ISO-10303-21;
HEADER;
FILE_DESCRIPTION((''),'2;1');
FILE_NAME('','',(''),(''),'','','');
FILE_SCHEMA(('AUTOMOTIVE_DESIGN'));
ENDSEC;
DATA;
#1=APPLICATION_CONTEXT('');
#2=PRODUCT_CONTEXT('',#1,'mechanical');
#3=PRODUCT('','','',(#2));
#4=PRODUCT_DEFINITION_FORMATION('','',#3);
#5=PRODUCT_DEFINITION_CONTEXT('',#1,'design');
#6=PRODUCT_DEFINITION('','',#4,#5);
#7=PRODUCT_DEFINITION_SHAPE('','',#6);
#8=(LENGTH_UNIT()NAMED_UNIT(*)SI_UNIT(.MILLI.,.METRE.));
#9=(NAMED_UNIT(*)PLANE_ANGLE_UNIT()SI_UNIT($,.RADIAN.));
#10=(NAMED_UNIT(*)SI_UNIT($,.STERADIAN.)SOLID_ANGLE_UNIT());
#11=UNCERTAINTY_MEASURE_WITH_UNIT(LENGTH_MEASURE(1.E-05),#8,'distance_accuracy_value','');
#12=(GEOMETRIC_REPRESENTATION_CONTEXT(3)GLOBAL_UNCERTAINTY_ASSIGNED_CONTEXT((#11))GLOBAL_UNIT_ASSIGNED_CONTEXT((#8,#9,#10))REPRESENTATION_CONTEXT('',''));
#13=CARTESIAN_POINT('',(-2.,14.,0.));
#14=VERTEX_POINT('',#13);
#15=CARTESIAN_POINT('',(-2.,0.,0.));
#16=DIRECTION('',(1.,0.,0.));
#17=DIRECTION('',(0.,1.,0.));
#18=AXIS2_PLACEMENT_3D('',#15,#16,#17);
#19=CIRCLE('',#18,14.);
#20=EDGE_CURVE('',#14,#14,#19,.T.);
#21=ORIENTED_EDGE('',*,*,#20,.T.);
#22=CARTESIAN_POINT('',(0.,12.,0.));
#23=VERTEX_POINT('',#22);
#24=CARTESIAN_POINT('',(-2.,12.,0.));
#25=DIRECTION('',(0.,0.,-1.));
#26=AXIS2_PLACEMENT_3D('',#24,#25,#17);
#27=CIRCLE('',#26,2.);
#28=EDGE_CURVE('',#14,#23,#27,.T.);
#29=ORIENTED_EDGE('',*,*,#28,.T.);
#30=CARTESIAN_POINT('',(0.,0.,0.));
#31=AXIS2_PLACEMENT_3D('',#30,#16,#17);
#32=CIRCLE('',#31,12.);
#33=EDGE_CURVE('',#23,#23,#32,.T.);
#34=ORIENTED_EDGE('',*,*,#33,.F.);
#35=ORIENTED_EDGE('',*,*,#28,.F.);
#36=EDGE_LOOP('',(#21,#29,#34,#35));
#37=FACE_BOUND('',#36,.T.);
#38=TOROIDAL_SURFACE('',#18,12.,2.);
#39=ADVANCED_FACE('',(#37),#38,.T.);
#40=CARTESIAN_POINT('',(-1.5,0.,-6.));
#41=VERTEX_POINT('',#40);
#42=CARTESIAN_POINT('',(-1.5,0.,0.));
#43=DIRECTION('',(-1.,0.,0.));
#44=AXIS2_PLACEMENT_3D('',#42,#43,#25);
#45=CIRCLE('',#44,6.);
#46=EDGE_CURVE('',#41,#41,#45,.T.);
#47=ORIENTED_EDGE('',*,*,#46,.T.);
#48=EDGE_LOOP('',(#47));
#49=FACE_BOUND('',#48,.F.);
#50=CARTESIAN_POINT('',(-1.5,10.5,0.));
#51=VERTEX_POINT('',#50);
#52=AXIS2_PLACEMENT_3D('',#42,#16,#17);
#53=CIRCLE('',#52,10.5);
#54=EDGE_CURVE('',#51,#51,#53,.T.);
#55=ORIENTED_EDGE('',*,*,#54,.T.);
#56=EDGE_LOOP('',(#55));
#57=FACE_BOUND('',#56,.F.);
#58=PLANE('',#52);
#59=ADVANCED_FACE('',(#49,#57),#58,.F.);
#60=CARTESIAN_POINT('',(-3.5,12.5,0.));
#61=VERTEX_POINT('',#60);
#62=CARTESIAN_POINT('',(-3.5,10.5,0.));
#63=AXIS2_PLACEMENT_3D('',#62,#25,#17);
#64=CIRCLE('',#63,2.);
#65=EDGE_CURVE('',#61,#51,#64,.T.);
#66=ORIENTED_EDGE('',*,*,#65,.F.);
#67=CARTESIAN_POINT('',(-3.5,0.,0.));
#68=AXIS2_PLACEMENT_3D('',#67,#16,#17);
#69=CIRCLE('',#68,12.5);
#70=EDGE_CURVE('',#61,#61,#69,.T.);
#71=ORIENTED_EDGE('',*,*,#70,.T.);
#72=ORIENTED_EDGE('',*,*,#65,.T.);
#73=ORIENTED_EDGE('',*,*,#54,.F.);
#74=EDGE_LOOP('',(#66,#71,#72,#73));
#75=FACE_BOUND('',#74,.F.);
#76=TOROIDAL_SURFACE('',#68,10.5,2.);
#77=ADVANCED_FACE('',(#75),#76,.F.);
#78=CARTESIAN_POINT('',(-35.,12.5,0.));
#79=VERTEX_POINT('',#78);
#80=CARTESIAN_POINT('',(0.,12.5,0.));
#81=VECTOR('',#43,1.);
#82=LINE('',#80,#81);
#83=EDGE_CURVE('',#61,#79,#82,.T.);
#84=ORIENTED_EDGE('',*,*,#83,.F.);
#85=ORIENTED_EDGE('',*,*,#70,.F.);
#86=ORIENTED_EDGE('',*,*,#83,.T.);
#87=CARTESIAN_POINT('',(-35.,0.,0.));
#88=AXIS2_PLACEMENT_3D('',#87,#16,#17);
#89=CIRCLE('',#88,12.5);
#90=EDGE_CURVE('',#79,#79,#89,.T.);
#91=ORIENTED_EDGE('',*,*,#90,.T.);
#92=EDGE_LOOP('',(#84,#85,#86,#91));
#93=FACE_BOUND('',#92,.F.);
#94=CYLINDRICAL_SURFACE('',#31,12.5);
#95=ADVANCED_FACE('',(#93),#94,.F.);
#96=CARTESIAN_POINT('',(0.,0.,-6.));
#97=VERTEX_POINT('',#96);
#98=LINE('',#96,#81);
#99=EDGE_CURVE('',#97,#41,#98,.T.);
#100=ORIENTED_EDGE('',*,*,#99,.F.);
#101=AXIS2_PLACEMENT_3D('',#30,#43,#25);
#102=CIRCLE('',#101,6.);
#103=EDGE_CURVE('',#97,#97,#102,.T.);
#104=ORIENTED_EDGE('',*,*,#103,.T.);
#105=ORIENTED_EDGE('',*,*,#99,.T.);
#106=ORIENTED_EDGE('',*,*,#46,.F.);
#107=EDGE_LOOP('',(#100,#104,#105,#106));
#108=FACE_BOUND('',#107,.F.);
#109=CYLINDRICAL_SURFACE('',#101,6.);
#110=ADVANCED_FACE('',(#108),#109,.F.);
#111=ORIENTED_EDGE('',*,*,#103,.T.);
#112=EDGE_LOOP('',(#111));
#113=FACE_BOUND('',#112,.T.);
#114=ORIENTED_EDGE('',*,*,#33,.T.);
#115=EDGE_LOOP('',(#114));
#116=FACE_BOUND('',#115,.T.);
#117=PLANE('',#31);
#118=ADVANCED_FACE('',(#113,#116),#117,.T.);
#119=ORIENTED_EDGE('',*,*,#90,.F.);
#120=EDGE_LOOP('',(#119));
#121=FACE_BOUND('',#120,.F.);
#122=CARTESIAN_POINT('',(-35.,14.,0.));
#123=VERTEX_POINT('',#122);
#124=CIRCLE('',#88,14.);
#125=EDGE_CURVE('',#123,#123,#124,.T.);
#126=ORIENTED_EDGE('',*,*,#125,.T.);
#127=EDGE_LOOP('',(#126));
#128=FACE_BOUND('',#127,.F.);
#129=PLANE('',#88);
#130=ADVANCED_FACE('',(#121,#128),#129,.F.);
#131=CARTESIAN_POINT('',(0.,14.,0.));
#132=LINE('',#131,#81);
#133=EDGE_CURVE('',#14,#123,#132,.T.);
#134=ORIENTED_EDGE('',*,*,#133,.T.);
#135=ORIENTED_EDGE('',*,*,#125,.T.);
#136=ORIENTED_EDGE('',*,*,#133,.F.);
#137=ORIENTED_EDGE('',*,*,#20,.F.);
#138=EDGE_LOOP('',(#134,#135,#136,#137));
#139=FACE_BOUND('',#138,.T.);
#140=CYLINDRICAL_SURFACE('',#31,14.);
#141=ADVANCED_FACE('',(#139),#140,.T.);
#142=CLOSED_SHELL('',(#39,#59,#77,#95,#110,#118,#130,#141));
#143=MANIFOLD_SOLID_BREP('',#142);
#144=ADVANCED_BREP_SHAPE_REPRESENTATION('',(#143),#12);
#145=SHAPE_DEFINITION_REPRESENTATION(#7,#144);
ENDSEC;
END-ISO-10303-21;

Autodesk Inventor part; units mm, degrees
ref_plane "YZ Plane" through (0, 0, 0) normal (1, 0, 0) x (0, 1, 0)
ref_plane "XZ Plane" through (0, 0, 0) normal (0, 1, 0) x (-1, 0, 0)
ref_plane "XY Plane" through (0, 0, 0) normal (0, 0, 1) x (1, 0, 0)
sketch "Sketch1" plane through (0, 0, 0) normal (1, 0, 0) x (0, 1, 0)
  circle A0 centre (0, 0) radius 14
  dimension "d0" = 28
extrude "Extrusion1" add sketch "Sketch1" against normal blind 35
shell "Shell1" thickness 1.5 removed faces 1 at (-35, 2.651, 3.8406)
sketch "Sketch2" plane through (0, 0, 0) normal (1, 0, 0) x (0, 0, -1)
  point P0 (0, 0)
hole "Hole1" at (0, 0, 0) direction (-1, 0, 0) diameter 12 end through all
fillet "Fillet1" radius 2 2 edges at (0, -14, 0) (-1.5, -12.5, 0)
properties material "Steel, Mild"
